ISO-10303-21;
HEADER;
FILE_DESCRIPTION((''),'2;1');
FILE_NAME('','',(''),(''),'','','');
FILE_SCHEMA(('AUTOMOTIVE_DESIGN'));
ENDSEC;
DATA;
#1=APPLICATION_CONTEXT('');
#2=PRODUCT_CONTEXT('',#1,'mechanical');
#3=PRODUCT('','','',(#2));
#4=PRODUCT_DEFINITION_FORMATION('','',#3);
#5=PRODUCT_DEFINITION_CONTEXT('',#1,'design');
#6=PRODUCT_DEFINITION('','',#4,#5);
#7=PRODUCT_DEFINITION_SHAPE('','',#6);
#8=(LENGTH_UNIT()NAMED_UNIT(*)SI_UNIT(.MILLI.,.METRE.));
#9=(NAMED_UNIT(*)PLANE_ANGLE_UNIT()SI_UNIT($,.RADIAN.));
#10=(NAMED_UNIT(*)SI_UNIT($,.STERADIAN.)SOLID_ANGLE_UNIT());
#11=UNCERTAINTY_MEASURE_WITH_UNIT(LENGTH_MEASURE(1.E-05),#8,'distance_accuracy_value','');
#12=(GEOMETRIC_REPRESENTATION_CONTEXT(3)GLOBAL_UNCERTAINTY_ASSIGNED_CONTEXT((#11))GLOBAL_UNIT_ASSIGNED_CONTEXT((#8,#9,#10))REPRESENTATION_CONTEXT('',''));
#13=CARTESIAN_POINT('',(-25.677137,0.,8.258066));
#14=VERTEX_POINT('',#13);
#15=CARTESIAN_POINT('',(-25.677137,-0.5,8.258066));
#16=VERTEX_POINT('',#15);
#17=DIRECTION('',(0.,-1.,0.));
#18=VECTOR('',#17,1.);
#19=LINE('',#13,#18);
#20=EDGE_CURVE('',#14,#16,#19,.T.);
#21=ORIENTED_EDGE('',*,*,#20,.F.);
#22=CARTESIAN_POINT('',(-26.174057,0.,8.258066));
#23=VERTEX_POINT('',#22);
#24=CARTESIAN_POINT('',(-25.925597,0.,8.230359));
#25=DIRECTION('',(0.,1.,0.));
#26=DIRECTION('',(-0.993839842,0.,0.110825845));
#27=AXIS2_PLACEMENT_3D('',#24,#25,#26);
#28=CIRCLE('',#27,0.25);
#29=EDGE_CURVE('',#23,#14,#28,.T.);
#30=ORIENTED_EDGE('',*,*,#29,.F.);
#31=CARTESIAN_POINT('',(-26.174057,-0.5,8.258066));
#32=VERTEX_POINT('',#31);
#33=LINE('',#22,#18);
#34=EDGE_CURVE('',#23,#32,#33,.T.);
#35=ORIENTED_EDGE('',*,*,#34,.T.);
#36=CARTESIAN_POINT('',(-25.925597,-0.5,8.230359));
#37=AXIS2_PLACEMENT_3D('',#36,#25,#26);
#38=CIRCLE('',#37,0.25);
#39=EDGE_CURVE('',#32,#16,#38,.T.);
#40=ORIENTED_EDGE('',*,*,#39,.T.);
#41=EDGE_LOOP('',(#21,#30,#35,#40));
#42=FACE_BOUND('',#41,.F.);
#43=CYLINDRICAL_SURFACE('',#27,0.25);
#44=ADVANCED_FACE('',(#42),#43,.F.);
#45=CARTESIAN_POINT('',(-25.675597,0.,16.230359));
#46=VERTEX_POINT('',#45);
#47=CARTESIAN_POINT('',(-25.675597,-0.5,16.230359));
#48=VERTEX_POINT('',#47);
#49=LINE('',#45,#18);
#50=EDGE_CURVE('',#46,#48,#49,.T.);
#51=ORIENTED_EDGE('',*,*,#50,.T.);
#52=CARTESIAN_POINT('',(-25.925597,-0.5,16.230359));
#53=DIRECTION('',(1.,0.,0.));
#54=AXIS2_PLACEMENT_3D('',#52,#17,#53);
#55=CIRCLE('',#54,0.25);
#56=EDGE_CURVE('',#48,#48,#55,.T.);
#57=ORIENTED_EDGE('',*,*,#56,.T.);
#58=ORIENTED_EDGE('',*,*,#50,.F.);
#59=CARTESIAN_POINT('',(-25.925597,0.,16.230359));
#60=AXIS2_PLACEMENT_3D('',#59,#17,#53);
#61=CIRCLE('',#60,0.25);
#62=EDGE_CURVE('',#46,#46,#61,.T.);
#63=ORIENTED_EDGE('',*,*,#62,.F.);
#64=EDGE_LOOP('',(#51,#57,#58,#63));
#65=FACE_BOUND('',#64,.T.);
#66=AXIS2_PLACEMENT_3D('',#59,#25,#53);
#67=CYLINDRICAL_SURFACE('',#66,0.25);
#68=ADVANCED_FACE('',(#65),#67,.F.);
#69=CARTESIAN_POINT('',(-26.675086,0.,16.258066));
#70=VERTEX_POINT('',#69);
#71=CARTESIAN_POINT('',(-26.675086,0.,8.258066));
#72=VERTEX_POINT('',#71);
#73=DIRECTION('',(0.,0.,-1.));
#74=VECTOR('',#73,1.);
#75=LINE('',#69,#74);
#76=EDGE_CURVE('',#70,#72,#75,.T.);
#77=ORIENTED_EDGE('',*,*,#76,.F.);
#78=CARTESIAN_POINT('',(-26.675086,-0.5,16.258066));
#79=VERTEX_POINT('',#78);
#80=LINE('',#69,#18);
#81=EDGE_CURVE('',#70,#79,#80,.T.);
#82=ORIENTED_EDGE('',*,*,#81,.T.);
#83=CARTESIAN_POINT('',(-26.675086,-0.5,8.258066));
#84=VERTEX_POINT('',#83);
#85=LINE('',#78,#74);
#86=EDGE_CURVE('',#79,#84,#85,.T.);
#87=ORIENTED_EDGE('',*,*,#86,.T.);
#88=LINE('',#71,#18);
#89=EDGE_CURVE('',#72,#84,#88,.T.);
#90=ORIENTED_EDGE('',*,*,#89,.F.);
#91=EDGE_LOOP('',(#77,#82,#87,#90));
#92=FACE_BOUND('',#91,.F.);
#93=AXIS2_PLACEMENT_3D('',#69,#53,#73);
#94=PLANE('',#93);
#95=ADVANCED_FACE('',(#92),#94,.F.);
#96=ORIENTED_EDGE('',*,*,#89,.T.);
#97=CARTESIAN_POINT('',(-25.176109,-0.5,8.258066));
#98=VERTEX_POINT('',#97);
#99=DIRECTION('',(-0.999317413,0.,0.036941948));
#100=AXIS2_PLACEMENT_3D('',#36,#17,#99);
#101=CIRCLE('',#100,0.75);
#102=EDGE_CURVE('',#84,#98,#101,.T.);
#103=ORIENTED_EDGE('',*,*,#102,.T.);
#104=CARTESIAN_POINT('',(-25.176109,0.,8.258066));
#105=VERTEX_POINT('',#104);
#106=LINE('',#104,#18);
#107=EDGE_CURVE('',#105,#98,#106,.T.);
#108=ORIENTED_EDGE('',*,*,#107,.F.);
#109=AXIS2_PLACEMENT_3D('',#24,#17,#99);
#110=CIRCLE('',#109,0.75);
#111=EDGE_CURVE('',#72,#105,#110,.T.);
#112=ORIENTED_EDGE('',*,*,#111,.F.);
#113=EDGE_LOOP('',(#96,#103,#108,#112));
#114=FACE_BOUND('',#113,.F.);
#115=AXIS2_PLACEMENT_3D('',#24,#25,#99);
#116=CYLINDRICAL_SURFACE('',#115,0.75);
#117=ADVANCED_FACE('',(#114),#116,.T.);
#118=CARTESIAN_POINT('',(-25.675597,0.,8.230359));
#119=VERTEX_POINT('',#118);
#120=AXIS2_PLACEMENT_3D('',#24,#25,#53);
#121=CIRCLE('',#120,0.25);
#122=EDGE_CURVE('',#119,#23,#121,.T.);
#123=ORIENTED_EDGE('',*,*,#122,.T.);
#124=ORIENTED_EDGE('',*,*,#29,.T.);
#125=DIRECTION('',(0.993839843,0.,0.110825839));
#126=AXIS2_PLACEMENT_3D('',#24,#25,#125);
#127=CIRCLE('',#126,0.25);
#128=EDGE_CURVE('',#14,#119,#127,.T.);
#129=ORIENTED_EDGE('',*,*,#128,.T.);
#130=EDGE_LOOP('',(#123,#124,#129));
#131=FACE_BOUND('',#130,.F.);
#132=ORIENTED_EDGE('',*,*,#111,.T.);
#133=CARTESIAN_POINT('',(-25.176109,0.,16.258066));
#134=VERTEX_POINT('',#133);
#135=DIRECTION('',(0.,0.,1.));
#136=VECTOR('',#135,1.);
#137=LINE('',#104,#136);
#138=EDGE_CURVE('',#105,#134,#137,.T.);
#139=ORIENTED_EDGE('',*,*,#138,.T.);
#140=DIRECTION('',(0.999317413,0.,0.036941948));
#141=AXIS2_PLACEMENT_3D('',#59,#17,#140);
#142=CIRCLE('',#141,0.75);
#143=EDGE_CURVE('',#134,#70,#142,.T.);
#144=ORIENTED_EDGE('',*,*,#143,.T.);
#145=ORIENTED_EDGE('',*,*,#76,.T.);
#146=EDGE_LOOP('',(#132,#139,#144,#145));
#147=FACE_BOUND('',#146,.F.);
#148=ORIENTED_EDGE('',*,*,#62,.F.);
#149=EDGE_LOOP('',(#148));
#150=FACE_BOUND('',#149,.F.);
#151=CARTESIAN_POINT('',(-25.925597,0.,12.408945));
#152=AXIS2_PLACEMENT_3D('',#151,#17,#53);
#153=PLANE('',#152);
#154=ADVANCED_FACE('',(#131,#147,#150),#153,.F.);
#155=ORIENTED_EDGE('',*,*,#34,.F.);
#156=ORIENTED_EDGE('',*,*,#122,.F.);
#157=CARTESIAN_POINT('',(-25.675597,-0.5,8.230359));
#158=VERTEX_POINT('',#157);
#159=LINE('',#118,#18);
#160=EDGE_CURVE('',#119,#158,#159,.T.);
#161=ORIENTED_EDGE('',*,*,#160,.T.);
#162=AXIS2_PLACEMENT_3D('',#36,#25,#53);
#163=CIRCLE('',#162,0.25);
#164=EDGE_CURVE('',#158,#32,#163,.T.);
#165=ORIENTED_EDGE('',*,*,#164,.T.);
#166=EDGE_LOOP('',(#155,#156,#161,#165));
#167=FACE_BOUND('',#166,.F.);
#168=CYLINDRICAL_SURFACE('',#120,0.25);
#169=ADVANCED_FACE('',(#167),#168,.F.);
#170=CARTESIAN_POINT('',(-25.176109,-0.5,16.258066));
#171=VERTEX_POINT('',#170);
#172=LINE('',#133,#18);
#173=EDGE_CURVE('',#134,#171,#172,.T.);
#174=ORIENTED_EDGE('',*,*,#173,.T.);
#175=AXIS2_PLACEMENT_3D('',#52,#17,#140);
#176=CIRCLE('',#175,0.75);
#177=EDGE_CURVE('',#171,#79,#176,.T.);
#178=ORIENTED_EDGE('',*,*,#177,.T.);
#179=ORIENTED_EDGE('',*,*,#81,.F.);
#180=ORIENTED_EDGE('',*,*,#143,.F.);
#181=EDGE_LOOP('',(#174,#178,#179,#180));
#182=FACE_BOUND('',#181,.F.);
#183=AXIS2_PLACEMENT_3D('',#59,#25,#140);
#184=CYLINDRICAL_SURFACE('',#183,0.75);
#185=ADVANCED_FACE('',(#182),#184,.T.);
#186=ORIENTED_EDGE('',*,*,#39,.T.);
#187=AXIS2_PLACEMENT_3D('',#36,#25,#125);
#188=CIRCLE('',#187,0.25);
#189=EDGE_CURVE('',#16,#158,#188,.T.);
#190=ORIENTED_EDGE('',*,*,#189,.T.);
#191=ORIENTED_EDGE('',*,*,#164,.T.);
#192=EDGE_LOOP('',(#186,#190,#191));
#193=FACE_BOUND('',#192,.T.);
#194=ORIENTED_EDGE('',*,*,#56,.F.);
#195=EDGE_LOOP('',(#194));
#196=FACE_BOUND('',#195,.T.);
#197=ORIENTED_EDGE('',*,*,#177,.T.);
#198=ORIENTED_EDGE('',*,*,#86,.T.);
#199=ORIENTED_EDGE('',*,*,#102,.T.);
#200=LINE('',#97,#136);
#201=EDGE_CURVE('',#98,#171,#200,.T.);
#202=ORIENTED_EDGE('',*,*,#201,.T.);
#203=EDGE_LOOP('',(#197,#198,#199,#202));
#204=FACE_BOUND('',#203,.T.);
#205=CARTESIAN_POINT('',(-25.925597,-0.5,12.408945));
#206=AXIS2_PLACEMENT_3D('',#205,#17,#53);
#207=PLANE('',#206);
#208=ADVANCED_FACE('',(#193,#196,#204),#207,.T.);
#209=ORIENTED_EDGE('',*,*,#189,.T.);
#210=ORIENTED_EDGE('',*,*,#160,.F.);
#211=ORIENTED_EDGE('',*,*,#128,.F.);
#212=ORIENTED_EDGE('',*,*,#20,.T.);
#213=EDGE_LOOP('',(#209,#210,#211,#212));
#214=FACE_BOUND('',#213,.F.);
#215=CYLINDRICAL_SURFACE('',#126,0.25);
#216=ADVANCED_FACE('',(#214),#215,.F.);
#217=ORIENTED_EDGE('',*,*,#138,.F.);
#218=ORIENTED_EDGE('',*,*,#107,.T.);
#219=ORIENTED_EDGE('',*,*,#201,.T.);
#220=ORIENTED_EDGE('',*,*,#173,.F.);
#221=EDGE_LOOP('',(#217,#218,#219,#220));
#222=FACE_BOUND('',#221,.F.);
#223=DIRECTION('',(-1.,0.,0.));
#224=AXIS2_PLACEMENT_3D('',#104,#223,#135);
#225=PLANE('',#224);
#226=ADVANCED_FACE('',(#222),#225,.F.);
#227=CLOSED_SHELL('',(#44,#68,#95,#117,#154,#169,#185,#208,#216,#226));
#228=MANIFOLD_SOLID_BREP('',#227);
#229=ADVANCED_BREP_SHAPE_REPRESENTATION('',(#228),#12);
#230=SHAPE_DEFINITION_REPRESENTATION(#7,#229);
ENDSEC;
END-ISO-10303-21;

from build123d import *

# Parameters (mm, degrees)
F0_R     = 0.25
F1_DEPTH = 0.5


# Not quite as in the source:
# - a feature names something its author has since deleted; it is built from what else it names


with BuildPart() as f1:
    # F0 (on Front) → F1 (new body)
    with BuildSketch(Plane.XZ):
        with BuildLine():
            Line((-25.6771374932, 8.2580658644), (-25.1761093938, 8.2580658644))
            Line((-25.1761093938, 8.2580658644), (-25.1761093938, 16.2026529417))
            Line((-25.1761093938, 16.2026529417), (-25.1761093938, 16.2580658644))
            ThreePointArc((-25.1761093938, 16.2580658644), (-25.9255974538, 16.9803594031), (-26.6750855137, 16.2580658644))
            Line((-26.6750855137, 16.2580658644), (-26.6750855137, 16.2026529417))
            Line((-26.6750855137, 16.2026529417), (-26.6750855137, 8.2580658644))
            Line((-26.6750855137, 8.2580658644), (-26.1740574143, 8.2580658644))
            ThreePointArc((-26.1740574143, 8.2580658644), (-25.9255974538, 8.4803594031), (-25.6771374932, 8.2580658644))
        make_face()
        with Locations((-25.9255974538, 16.2303594031)):
            Circle(F0_R, mode=Mode.SUBTRACT)
        with BuildLine():
            ThreePointArc((-26.6750855137, 8.2580658644), (-25.9255974538, 7.4803594031), (-25.1761093938, 8.2580658644))
            Line((-25.1761093938, 8.2580658644), (-25.6771374932, 8.2580658644))
            ThreePointArc((-25.6771374932, 8.2580658644), (-25.6759827606, 8.2442340177), (-25.6755974538, 8.2303594031))
            ThreePointArc((-25.6755974538, 8.2303594031), (-25.9394720684, 7.9807447099), (-26.1740574143, 8.2580658644))
            Line((-26.1740574143, 8.2580658644), (-26.6750855137, 8.2580658644))
        make_face()
    extrude(amount=F1_DEPTH)


solid = f1.part
